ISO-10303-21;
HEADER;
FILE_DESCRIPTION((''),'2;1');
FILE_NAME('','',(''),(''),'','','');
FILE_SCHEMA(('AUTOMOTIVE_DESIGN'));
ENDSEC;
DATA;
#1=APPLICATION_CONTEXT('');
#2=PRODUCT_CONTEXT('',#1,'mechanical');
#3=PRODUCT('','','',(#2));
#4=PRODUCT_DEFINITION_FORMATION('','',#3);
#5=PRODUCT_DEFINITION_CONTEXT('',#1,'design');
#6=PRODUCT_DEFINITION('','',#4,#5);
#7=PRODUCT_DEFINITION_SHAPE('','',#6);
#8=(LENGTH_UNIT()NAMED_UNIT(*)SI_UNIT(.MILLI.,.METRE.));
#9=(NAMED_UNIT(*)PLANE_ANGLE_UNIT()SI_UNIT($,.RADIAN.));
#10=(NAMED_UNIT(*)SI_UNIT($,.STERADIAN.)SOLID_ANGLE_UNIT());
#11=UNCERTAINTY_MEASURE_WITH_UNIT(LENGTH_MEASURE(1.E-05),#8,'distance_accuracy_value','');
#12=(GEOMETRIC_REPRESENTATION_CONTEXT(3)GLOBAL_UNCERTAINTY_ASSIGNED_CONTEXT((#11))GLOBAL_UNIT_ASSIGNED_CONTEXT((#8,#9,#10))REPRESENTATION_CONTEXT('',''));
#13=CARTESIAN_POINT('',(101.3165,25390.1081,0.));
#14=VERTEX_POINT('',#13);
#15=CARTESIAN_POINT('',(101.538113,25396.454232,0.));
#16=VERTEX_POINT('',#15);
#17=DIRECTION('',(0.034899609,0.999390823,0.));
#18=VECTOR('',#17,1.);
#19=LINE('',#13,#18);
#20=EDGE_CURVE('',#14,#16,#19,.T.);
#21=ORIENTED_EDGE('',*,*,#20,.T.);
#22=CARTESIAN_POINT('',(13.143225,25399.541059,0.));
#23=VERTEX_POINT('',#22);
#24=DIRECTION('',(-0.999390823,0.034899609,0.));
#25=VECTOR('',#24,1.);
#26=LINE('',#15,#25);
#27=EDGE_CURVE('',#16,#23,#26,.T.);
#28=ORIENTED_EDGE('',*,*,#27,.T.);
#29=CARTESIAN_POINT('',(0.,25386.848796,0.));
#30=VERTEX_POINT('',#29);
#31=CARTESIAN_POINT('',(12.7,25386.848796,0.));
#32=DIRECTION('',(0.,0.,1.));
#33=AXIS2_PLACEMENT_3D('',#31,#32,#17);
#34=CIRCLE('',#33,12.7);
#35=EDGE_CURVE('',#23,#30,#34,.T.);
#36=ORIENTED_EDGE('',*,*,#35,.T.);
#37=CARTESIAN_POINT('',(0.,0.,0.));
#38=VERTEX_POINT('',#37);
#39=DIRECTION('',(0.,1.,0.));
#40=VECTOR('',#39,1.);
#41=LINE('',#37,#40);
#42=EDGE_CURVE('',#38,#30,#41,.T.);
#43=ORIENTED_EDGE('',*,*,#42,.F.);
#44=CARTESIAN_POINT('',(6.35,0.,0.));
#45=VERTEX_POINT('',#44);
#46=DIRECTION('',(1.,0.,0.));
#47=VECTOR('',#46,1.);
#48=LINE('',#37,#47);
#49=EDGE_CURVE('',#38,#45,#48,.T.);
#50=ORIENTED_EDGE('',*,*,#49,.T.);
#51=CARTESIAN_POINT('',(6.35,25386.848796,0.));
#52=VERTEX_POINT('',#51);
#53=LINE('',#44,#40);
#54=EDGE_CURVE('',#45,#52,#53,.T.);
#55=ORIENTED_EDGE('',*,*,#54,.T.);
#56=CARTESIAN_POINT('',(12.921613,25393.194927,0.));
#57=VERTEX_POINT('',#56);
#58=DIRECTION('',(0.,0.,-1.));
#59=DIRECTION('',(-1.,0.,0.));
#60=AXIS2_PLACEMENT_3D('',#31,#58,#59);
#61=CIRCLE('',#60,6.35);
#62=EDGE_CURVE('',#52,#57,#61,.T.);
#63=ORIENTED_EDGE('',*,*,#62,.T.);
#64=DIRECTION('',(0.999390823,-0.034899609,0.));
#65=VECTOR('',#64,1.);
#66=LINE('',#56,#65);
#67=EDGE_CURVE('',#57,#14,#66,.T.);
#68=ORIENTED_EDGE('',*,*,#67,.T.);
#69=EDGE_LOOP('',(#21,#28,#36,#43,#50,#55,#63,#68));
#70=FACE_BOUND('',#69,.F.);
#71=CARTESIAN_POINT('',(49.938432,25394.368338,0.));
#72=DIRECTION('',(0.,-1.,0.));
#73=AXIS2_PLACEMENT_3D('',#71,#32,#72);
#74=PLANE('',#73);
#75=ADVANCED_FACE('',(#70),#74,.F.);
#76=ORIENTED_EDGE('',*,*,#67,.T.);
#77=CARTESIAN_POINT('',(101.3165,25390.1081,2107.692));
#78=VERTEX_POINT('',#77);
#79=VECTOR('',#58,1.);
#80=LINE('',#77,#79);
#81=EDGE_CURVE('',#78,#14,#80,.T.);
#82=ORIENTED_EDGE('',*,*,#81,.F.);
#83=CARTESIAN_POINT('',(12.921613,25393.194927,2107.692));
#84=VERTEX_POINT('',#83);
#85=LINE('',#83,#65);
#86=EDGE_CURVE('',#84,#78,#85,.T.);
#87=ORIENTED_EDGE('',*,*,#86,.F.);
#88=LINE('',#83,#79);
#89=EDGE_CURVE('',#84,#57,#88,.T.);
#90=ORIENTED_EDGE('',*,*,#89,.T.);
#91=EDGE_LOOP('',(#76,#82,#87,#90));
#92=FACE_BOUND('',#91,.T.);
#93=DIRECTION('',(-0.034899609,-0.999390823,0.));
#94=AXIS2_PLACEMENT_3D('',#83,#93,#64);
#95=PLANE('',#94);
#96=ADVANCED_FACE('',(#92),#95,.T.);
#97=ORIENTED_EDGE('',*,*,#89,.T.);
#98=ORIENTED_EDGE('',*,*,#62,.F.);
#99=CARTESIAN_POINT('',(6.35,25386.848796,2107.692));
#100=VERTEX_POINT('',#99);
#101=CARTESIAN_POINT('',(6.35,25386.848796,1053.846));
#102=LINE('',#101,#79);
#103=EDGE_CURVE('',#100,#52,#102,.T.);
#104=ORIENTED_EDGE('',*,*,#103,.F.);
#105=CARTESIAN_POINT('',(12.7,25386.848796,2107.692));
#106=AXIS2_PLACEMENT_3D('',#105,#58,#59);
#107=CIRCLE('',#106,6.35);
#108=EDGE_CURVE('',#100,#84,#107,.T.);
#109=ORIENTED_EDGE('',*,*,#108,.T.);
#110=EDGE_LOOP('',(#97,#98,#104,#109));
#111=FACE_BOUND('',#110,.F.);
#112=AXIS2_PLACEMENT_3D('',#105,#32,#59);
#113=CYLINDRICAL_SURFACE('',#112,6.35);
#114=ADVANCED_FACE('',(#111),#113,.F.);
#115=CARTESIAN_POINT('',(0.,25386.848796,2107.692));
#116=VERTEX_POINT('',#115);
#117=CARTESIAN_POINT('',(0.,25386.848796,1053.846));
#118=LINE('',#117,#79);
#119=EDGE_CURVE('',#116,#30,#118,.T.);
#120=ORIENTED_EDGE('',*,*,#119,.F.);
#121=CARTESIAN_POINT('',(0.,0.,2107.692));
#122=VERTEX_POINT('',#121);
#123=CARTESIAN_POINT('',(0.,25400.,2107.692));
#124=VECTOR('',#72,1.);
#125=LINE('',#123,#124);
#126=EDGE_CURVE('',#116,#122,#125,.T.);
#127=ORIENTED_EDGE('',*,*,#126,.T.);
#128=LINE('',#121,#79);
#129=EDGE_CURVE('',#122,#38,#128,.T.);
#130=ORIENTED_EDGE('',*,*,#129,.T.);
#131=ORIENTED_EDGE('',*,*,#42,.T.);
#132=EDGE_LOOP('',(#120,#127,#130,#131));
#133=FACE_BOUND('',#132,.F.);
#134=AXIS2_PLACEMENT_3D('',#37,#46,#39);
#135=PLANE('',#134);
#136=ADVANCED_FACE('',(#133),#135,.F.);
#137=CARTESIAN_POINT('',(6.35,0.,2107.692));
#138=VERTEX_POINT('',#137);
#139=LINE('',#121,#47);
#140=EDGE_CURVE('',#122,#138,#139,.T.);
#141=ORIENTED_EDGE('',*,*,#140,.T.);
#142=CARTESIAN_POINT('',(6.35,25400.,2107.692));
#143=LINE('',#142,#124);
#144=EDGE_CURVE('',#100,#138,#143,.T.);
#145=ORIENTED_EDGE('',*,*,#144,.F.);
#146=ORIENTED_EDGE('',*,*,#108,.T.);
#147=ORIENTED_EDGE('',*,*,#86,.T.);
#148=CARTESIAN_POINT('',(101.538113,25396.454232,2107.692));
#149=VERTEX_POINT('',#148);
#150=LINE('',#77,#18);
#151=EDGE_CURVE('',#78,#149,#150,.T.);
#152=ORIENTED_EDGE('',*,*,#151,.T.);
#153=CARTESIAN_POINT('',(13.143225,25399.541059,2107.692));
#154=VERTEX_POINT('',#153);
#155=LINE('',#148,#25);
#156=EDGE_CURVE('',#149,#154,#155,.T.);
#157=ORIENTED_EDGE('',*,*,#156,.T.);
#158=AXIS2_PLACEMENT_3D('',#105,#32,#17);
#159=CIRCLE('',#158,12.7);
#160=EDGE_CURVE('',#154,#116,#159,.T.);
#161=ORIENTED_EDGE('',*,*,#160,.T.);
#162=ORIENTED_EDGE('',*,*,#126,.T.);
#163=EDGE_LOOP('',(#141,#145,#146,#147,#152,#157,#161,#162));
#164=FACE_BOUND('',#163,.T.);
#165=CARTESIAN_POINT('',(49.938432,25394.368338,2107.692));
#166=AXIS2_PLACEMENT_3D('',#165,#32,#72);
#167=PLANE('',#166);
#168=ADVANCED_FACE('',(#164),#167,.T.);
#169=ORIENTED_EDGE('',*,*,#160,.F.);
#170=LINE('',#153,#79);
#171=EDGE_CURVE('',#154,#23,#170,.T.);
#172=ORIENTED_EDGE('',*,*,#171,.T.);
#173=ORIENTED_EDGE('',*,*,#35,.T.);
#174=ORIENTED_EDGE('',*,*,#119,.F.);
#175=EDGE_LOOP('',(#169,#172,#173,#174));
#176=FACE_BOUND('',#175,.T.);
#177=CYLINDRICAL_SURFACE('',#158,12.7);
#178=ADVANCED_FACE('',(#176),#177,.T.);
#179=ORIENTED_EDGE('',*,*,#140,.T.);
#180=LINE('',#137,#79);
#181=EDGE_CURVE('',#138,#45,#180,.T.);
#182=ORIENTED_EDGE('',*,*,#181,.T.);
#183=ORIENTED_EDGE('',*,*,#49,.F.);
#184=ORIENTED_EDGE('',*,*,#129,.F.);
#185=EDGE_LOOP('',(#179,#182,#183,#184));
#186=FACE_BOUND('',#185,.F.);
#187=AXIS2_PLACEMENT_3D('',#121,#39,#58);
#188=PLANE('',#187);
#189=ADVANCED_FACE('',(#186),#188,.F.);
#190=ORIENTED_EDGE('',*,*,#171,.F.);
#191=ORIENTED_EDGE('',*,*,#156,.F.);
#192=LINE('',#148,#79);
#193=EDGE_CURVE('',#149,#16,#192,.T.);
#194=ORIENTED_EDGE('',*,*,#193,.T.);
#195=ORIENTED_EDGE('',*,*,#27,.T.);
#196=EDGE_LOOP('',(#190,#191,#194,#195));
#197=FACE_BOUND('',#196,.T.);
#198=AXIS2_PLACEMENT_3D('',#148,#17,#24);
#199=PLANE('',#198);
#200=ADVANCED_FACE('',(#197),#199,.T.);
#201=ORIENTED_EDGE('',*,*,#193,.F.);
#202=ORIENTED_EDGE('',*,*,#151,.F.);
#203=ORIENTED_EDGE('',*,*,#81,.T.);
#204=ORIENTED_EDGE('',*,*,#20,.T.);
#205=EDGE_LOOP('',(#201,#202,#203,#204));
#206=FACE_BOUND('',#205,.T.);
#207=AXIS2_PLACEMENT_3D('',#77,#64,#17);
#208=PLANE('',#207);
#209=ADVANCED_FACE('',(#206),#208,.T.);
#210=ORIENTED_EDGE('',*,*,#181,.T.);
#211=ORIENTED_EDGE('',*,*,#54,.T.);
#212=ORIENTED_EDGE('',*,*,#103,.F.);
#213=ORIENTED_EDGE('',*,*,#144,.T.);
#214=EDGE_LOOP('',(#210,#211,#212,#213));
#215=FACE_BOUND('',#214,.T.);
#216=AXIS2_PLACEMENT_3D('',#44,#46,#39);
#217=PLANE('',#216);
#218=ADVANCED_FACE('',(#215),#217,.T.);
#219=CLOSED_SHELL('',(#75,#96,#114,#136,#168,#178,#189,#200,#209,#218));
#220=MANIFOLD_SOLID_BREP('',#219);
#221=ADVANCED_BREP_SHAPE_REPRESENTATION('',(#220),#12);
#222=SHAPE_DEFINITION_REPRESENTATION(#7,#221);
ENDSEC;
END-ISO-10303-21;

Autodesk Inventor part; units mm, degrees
ref_plane "YZ Plane" through (0, 0, 0) normal (1, 0, 0) x (0, 1, 0)
ref_plane "XZ Plane" through (0, 0, 0) normal (0, 1, 0) x (-1, 0, 0)
ref_plane "XY Plane" through (0, 0, 0) normal (0, 0, 1) x (1, 0, 0)
sketch "Sketch29" plane through (0, 0, 0) normal (1, 0, 0) x (0, 1, 0)
  line L0 (0, 0) -> (25400, 0)
  line L1 (25400, 0) -> (25400, 2107.692)
  line L2 (25400, 2107.692) -> (0, 2107.692)
  line L3 (0, 2107.692) -> (0, 0)
  dimension "d230" = 2107.692
  dimension "d231" = 25400
extrude "Plate26" add sketch "Sketch29" along normal blind 6.35
sketch "Sketch30" plane through (-0.2216, 25393.6539, 2107.692) normal (0.0348995, 0.9993908, 0) x (-0.9993908, 0.0348995, 0)
  line L0 (0, -2107.692) -> (0, 0)
  line L1 (0, 0) -> (-101.6, 0)
  line L2 (-101.6, 0) -> (-101.6, -2107.692)
  line L3 (-101.6, -2107.692) -> (0, -2107.692)
edge flange "Flange23" height 101.6 angle 92 thickness 6.35 bend radius 6.35 thickness toward (0.0348995, 0.9993908, 0) relief tear relief width 6.35 relief depth 3.175 edges at (6.35, 25400, 1053.846) wall of the first edge with corners at (-0.2216, 25393.6539, 0) (-0.2216, 25393.6539, 2107.692) (101.3165, 25390.1081, 2107.692) (101.3165, 25390.1081, 0)
bend "Bend23"
corner "Corner22"
equation "\"d230\" = LARGO"
equation "\"d231\" = ALTO"
equation "\"d237\" = LARGOF"
equation "\"d238\" = ANGULOF"
equation "\"BendRadius\" = Thickness"
equation "\"BendReliefWidth\" = Thickness"
equation "\"BendReliefDepth\" = 0.5 * Thickness"
equation "\"CornerReliefSize\" = 4 * Thickness"
equation "\"MinimumRemnant\" = 2 * Thickness"
equation "\"TransitionRadius\" = BendRadius"
equation "\"JacobiRadiusSize\" = BendRadius"
equation "\"GapSize\" = Thickness"
equation "\"LARGO\" = 2107.692"
equation "\"ALTO\" = 25400"
equation "\"LARGOF\" = 101.6"
equation "\"ANGULOF\" = 92deg"
properties part number "BackWallTop" material "Carbon Steel - A36"
